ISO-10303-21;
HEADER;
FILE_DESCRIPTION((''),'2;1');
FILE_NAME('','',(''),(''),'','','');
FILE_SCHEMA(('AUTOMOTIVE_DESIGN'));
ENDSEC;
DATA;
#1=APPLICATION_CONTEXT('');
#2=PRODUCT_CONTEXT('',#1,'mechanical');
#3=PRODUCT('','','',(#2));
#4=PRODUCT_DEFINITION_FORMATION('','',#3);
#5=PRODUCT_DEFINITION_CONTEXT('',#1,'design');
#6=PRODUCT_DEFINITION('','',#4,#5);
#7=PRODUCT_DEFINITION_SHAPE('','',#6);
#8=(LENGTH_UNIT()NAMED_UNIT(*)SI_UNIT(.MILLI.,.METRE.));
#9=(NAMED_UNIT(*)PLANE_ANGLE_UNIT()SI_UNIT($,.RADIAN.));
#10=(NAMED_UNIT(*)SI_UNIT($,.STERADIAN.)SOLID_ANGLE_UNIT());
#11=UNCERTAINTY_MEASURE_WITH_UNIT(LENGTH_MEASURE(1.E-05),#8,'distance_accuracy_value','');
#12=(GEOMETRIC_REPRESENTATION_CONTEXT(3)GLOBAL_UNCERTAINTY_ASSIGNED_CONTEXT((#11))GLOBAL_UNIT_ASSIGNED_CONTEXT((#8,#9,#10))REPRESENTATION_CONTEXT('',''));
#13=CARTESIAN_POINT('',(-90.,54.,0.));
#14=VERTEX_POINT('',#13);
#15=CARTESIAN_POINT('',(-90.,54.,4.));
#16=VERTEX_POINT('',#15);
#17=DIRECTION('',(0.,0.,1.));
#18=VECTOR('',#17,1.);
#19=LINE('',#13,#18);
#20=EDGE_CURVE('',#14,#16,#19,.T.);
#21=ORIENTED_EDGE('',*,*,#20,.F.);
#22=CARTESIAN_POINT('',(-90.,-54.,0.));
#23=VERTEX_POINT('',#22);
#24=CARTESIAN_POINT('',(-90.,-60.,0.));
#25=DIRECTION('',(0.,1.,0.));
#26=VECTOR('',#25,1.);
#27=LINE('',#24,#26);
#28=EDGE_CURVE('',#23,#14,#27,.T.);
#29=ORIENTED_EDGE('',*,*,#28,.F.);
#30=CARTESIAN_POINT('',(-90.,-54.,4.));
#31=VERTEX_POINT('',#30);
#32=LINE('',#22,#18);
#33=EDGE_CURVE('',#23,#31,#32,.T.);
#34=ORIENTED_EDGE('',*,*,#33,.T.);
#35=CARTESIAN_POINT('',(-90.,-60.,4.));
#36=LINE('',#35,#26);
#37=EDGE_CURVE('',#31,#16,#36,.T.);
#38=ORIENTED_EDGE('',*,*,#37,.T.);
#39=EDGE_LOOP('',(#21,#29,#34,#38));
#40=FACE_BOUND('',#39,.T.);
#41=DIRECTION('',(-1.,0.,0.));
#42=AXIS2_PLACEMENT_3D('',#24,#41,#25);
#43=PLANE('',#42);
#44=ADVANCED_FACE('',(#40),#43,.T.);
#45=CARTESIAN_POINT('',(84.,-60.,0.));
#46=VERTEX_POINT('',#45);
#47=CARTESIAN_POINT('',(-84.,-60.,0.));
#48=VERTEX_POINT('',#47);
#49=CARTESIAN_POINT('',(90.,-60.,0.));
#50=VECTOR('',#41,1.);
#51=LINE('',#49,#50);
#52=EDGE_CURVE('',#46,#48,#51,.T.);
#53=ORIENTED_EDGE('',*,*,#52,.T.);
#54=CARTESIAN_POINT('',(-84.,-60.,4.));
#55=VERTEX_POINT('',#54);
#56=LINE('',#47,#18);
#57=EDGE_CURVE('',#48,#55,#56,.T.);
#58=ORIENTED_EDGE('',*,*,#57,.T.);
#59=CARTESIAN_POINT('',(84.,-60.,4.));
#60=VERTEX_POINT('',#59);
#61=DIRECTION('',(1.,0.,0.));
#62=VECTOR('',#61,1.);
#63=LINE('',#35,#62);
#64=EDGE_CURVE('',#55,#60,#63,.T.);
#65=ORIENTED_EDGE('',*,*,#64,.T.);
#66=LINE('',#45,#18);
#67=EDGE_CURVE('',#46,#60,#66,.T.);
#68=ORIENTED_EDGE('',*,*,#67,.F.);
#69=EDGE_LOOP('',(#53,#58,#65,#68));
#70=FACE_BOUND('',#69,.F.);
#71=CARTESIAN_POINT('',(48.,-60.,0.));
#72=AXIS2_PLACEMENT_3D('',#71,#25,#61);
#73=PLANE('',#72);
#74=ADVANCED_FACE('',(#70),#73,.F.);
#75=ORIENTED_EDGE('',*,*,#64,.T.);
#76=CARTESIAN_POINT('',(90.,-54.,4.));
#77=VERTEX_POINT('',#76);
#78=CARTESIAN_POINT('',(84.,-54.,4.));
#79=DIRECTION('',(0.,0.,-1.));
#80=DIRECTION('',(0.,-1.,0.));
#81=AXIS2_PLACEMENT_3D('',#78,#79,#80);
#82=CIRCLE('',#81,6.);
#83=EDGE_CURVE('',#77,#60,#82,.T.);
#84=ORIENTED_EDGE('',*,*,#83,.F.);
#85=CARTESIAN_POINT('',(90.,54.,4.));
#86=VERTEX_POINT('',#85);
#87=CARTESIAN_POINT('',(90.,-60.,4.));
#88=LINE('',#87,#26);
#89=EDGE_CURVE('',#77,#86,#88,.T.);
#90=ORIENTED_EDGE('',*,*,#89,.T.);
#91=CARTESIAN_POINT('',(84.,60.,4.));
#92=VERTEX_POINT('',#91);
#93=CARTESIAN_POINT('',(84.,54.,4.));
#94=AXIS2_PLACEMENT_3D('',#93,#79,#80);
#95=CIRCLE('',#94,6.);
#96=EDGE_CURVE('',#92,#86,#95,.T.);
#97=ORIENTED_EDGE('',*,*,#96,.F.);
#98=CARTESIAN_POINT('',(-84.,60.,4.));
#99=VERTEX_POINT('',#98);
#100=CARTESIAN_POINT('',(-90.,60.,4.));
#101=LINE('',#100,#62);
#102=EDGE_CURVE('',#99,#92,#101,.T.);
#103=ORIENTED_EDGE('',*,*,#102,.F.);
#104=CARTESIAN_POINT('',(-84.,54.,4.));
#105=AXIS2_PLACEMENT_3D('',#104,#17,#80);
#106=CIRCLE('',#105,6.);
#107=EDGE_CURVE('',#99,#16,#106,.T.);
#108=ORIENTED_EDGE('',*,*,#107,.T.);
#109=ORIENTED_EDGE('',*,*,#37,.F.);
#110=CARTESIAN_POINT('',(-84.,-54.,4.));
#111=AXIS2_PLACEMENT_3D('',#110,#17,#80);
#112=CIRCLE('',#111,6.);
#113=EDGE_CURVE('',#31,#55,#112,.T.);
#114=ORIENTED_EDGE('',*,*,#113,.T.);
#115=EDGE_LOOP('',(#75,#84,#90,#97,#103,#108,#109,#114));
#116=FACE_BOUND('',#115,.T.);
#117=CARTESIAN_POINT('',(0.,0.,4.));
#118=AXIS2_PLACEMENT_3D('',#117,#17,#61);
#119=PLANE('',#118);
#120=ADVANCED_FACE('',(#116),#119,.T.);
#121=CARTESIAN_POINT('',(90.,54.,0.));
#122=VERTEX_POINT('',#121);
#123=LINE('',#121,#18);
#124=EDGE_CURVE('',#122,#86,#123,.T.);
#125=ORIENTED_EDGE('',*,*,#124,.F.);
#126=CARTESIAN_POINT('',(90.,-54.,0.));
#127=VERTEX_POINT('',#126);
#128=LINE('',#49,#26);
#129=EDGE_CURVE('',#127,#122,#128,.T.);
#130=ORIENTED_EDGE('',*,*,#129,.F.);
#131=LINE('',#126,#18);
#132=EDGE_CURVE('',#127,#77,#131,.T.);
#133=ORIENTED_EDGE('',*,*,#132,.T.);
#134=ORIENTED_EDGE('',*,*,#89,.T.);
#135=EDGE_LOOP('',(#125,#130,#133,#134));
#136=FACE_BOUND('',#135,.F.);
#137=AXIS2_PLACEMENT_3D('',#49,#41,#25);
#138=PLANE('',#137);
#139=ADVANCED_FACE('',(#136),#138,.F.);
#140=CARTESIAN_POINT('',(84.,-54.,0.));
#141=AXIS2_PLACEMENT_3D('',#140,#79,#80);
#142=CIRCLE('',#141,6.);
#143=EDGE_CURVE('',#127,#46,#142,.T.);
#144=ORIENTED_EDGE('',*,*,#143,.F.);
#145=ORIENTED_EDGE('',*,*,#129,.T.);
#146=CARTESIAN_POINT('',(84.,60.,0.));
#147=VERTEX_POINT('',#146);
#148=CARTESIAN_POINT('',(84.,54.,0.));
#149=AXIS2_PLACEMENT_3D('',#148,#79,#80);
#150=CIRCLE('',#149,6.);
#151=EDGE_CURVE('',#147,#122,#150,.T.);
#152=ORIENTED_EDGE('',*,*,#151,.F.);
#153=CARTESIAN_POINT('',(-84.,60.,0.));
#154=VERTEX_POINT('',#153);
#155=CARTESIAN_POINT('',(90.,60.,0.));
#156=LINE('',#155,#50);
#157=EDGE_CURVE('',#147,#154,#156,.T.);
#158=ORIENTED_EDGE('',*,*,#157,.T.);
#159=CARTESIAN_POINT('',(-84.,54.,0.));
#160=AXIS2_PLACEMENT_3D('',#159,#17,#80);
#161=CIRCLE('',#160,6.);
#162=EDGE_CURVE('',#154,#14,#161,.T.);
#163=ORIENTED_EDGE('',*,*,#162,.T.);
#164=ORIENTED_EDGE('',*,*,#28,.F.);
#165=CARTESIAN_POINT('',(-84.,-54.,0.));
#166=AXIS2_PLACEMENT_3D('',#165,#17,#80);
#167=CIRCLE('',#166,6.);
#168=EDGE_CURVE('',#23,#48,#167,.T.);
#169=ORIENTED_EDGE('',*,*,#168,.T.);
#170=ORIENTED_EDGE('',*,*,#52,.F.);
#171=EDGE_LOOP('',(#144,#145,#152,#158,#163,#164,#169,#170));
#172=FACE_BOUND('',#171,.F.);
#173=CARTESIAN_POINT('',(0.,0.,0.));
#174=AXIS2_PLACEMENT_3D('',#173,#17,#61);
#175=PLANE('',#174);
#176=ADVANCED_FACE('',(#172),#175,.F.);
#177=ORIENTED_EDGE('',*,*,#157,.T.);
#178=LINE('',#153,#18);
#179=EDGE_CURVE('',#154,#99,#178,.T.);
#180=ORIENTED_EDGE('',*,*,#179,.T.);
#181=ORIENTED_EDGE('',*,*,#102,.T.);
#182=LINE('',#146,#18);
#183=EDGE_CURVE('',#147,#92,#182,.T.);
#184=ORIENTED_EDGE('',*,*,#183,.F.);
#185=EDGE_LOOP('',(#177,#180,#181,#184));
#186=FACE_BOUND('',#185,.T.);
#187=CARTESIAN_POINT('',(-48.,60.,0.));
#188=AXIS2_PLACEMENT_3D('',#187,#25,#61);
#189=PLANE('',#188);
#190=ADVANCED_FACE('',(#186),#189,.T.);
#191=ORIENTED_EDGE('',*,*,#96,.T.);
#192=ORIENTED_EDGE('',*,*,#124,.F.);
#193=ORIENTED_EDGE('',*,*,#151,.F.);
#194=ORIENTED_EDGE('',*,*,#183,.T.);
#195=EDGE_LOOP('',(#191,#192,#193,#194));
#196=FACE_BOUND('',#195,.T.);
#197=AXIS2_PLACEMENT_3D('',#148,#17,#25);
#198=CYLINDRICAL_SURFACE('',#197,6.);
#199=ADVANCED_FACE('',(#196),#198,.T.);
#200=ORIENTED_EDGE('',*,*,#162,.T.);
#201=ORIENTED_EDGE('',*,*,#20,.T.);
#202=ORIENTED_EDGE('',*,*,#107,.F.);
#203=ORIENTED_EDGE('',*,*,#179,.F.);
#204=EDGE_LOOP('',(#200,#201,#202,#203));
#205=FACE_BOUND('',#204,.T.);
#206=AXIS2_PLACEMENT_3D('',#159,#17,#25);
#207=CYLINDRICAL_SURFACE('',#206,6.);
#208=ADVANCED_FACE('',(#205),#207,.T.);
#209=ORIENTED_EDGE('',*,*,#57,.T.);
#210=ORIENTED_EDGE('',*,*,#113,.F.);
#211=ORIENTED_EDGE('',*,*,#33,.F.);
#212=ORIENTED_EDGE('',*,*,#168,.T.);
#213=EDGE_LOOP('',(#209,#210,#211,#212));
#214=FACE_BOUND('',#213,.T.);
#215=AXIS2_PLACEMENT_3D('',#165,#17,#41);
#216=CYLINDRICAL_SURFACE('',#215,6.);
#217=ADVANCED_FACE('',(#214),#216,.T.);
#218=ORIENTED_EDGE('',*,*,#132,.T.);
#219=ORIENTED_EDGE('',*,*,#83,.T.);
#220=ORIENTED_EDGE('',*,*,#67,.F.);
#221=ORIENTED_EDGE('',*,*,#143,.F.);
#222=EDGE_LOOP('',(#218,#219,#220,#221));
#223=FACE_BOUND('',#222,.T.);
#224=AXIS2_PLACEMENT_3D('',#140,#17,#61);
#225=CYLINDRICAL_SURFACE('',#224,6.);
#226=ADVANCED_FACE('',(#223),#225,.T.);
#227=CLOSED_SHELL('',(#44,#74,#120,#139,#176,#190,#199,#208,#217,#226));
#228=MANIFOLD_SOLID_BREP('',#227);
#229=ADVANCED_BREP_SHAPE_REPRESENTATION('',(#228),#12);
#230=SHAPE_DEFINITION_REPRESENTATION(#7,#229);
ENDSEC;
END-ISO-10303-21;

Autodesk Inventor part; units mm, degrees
ref_plane "YZ Plane" through (0, 0, 0) normal (1, 0, 0) x (0, 1, 0)
ref_plane "XZ Plane" through (0, 0, 0) normal (0, 1, 0) x (-1, 0, 0)
ref_plane "XY Plane" through (0, 0, 0) normal (0, 0, 1) x (1, 0, 0)
sketch3d "3D Sketch1"
sketch "Sketch1" plane through (0, 0, 0) normal (0, 0, 1) x (1, 0, 0)
  line L0 (-48, 60) -> (48, 60)
  line L1 (48, 60) -> (48, -60) construction
  line L2 (48, -60) -> (-48, -60)
  line L3 (-48, -60) -> (-48, 60) construction
  line L4 (-48, 60) -> (48, -60) construction
  line L5 (48, 60) -> (-48, -60) construction
  line L6 (48, -60) -> (90, -60)
  line L7 (90, -60) -> (90, 60)
  line L8 (90, 60) -> (48, 60)
  line L9 (-48, -60) -> (-90, -60)
  line L10 (-90, -60) -> (-90, 60)
  line L11 (-90, 60) -> (-48, 60)
  circle A0 centre (70, -45) radius 8.5
  circle A1 centre (70, 45) radius 8.5
  circle A2 centre (-70, -45) radius 8.5
  circle A3 centre (-70, 45) radius 8.5
  line L12 (0, -60) -> (0, 60) construction
  line L13 (90, 0) -> (-90, 0) construction
  point P0 (0, 0)
  dimension "d30" = 120
  dimension "d34" = 180
  dimension "d35" = 17
  dimension "d36" = 20
  dimension "d37" = 15
extrude "Plate1" add sketch "Sketch1" along normal blind 4 contours L0 L8 L7 L6 L2 L9 L10 L11 | A0 | A1 | A2 | A3
fillet "Corner Round1" radius 6 4 edges at (90, 60, 2) (-90, 60, 2) (-90, -60, 2) (90, -60, 2)
equation "\"d6\" = Thickness"
equation "\"BendReliefWidth\" = Thickness"
equation "\"BendReliefDepth\" = 0.5 * Thickness"
equation "\"CornerReliefSize\" = 4 * Thickness"
equation "\"MinimumRemnant\" = 2 * Thickness"
equation "\"TransitionRadius\" = BendRadius"
equation "\"JacobiRadiusSize\" = BendRadius"
equation "\"GapSize\" = Thickness"
equation "\"Thickness\" = 4"
equation "\"BendRadius\" = 6"
properties part number "MSC 907 BASE FRAME TRANSVERSE" material "Stainless Steel"
